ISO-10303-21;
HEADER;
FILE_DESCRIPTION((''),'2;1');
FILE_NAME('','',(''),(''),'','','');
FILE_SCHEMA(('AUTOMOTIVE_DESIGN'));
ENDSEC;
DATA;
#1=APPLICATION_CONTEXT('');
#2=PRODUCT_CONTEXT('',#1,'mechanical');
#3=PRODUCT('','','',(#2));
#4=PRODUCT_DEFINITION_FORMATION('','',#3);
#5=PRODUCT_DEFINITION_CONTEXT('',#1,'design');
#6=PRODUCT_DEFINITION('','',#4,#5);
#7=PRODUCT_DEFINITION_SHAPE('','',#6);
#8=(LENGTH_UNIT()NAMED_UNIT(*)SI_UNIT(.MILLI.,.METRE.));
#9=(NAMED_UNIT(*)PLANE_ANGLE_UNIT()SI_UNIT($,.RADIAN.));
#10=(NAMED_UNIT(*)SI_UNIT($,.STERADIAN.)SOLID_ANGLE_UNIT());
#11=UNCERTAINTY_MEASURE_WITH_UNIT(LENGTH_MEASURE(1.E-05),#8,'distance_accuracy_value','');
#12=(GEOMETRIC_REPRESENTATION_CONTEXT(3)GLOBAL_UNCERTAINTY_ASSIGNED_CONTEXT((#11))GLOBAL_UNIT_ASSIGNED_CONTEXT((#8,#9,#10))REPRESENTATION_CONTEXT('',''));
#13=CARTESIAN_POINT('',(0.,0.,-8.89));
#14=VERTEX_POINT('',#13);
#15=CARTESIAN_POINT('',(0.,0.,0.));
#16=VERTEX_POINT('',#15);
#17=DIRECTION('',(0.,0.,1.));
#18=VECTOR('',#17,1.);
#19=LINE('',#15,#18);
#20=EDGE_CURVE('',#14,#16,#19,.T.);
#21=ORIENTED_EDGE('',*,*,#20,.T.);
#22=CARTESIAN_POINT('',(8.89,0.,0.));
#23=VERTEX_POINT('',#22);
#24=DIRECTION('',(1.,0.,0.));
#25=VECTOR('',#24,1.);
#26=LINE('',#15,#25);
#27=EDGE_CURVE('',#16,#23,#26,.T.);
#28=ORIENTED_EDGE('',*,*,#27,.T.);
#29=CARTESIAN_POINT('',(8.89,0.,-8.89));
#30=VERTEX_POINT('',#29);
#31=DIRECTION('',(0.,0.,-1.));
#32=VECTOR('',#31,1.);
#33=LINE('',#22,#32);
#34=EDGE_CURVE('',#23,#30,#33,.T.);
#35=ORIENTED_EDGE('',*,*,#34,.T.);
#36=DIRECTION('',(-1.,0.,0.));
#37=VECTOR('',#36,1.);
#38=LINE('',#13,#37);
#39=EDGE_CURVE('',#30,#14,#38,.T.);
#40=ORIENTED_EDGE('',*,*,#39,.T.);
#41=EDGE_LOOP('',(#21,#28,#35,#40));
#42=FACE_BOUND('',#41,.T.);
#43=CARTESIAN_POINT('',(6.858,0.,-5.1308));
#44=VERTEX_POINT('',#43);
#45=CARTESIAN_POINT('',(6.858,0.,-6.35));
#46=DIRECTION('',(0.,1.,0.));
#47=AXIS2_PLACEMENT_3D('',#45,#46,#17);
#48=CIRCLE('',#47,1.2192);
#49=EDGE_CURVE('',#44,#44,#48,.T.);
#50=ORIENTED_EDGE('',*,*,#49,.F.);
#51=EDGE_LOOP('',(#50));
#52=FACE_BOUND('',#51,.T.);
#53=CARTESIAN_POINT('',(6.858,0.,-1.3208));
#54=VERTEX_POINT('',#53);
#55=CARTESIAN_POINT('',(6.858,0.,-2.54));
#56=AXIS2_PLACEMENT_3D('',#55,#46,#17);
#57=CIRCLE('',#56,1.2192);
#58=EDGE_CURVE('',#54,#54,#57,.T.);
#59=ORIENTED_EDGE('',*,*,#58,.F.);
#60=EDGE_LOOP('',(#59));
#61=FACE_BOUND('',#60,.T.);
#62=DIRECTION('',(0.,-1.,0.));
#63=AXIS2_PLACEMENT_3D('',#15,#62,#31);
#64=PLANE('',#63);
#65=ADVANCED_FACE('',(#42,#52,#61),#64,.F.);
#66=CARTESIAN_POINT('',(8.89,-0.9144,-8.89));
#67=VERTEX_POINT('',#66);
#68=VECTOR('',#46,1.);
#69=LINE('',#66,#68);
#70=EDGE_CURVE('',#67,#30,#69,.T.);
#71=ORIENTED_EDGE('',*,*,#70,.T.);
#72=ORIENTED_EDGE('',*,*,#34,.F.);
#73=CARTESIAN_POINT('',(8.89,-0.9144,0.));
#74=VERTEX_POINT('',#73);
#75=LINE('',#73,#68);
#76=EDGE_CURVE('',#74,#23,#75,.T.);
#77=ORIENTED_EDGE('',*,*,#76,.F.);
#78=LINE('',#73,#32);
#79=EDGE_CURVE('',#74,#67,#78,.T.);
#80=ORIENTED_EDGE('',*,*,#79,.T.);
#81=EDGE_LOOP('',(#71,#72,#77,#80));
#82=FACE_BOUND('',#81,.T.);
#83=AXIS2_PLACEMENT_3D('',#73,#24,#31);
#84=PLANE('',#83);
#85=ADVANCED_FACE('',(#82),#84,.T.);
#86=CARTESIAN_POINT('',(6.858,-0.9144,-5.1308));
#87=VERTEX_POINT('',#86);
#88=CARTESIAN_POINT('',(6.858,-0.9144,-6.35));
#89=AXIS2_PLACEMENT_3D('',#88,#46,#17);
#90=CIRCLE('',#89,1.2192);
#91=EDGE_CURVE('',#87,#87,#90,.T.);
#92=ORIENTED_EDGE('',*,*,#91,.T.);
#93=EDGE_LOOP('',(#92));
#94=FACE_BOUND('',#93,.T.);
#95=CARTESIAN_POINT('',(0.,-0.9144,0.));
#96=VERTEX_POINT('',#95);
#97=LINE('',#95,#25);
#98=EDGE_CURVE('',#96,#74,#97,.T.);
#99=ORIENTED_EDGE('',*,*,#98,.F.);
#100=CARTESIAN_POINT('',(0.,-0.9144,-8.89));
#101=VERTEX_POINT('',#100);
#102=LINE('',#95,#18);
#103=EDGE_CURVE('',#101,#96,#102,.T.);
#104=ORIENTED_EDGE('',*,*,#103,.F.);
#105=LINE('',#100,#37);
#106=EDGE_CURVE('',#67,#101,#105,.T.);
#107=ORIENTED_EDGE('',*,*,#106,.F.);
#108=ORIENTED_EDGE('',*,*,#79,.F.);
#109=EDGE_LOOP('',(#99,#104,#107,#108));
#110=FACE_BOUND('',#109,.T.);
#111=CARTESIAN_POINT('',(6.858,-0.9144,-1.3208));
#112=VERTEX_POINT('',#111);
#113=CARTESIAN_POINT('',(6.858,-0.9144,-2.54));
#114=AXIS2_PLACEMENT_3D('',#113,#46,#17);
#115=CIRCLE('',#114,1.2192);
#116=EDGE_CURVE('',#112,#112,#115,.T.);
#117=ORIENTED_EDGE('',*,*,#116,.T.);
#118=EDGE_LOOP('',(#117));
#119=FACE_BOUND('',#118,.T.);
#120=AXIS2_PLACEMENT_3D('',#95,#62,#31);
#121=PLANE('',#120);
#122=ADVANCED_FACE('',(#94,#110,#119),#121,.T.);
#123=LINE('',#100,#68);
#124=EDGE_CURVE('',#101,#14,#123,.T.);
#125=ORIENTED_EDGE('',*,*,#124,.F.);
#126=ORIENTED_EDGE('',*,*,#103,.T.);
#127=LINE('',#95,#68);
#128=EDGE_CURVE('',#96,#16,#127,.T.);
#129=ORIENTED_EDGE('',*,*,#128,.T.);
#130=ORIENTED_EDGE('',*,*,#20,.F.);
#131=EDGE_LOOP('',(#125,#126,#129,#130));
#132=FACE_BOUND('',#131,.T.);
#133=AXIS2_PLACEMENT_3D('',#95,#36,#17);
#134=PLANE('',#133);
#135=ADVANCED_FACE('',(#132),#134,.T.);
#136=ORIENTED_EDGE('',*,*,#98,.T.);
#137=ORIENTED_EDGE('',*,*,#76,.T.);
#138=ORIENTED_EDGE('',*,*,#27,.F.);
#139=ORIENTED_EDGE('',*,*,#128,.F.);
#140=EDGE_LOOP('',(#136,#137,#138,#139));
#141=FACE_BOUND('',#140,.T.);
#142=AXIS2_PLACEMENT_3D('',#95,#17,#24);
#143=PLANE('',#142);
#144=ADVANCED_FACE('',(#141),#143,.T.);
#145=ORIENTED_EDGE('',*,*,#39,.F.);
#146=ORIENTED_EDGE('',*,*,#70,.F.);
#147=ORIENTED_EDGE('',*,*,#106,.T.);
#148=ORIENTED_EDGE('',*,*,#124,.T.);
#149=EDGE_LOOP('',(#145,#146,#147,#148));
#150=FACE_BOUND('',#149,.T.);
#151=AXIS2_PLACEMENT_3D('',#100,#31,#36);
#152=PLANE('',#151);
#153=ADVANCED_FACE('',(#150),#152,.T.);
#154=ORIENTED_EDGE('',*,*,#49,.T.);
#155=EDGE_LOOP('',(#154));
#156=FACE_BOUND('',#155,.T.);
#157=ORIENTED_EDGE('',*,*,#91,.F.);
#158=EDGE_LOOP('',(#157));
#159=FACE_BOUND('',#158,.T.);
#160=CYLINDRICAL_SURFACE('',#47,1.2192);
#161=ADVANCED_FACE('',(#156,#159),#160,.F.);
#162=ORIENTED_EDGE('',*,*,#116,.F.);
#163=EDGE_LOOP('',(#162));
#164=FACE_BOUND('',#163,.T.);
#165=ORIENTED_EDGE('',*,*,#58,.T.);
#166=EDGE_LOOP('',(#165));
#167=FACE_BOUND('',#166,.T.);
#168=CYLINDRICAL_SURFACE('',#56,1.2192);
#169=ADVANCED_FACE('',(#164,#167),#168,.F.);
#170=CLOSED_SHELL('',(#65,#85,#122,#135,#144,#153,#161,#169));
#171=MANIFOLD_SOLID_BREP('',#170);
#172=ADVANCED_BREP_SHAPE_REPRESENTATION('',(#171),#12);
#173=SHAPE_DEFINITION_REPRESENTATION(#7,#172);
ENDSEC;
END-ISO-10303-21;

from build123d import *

# Parameters (mm, degrees)
SKETCH1_W             = 8.89
SKETCH1_H             = 8.89
BASE_FLANGE1_DEPTH    = 0.9144
F_2_CLEARANCE_HOLE1_D = 2.4384


# Sheet-metal steps are written as plain solids
with BuildPart() as part:
    # Sketch1 → Base-Flange1 (new body)
    with BuildSketch(Plane(origin=(0, 0, 0), x_dir=(1, 0, 0), z_dir=(0, 1, 0))):
        with Locations((4.445, 4.445)):
            Rectangle(SKETCH1_W, SKETCH1_H)
    extrude(amount=-BASE_FLANGE1_DEPTH)

    # #2 Clearance Hole1 (through all)
    with Locations(Plane(origin=(0, 0, 0), x_dir=(1, 0, 0), z_dir=(0, 1, 0))):
        with Locations((6.858, 2.54), (6.858, 6.35)):
            Hole(F_2_CLEARANCE_HOLE1_D / 2)


solid = part.part
